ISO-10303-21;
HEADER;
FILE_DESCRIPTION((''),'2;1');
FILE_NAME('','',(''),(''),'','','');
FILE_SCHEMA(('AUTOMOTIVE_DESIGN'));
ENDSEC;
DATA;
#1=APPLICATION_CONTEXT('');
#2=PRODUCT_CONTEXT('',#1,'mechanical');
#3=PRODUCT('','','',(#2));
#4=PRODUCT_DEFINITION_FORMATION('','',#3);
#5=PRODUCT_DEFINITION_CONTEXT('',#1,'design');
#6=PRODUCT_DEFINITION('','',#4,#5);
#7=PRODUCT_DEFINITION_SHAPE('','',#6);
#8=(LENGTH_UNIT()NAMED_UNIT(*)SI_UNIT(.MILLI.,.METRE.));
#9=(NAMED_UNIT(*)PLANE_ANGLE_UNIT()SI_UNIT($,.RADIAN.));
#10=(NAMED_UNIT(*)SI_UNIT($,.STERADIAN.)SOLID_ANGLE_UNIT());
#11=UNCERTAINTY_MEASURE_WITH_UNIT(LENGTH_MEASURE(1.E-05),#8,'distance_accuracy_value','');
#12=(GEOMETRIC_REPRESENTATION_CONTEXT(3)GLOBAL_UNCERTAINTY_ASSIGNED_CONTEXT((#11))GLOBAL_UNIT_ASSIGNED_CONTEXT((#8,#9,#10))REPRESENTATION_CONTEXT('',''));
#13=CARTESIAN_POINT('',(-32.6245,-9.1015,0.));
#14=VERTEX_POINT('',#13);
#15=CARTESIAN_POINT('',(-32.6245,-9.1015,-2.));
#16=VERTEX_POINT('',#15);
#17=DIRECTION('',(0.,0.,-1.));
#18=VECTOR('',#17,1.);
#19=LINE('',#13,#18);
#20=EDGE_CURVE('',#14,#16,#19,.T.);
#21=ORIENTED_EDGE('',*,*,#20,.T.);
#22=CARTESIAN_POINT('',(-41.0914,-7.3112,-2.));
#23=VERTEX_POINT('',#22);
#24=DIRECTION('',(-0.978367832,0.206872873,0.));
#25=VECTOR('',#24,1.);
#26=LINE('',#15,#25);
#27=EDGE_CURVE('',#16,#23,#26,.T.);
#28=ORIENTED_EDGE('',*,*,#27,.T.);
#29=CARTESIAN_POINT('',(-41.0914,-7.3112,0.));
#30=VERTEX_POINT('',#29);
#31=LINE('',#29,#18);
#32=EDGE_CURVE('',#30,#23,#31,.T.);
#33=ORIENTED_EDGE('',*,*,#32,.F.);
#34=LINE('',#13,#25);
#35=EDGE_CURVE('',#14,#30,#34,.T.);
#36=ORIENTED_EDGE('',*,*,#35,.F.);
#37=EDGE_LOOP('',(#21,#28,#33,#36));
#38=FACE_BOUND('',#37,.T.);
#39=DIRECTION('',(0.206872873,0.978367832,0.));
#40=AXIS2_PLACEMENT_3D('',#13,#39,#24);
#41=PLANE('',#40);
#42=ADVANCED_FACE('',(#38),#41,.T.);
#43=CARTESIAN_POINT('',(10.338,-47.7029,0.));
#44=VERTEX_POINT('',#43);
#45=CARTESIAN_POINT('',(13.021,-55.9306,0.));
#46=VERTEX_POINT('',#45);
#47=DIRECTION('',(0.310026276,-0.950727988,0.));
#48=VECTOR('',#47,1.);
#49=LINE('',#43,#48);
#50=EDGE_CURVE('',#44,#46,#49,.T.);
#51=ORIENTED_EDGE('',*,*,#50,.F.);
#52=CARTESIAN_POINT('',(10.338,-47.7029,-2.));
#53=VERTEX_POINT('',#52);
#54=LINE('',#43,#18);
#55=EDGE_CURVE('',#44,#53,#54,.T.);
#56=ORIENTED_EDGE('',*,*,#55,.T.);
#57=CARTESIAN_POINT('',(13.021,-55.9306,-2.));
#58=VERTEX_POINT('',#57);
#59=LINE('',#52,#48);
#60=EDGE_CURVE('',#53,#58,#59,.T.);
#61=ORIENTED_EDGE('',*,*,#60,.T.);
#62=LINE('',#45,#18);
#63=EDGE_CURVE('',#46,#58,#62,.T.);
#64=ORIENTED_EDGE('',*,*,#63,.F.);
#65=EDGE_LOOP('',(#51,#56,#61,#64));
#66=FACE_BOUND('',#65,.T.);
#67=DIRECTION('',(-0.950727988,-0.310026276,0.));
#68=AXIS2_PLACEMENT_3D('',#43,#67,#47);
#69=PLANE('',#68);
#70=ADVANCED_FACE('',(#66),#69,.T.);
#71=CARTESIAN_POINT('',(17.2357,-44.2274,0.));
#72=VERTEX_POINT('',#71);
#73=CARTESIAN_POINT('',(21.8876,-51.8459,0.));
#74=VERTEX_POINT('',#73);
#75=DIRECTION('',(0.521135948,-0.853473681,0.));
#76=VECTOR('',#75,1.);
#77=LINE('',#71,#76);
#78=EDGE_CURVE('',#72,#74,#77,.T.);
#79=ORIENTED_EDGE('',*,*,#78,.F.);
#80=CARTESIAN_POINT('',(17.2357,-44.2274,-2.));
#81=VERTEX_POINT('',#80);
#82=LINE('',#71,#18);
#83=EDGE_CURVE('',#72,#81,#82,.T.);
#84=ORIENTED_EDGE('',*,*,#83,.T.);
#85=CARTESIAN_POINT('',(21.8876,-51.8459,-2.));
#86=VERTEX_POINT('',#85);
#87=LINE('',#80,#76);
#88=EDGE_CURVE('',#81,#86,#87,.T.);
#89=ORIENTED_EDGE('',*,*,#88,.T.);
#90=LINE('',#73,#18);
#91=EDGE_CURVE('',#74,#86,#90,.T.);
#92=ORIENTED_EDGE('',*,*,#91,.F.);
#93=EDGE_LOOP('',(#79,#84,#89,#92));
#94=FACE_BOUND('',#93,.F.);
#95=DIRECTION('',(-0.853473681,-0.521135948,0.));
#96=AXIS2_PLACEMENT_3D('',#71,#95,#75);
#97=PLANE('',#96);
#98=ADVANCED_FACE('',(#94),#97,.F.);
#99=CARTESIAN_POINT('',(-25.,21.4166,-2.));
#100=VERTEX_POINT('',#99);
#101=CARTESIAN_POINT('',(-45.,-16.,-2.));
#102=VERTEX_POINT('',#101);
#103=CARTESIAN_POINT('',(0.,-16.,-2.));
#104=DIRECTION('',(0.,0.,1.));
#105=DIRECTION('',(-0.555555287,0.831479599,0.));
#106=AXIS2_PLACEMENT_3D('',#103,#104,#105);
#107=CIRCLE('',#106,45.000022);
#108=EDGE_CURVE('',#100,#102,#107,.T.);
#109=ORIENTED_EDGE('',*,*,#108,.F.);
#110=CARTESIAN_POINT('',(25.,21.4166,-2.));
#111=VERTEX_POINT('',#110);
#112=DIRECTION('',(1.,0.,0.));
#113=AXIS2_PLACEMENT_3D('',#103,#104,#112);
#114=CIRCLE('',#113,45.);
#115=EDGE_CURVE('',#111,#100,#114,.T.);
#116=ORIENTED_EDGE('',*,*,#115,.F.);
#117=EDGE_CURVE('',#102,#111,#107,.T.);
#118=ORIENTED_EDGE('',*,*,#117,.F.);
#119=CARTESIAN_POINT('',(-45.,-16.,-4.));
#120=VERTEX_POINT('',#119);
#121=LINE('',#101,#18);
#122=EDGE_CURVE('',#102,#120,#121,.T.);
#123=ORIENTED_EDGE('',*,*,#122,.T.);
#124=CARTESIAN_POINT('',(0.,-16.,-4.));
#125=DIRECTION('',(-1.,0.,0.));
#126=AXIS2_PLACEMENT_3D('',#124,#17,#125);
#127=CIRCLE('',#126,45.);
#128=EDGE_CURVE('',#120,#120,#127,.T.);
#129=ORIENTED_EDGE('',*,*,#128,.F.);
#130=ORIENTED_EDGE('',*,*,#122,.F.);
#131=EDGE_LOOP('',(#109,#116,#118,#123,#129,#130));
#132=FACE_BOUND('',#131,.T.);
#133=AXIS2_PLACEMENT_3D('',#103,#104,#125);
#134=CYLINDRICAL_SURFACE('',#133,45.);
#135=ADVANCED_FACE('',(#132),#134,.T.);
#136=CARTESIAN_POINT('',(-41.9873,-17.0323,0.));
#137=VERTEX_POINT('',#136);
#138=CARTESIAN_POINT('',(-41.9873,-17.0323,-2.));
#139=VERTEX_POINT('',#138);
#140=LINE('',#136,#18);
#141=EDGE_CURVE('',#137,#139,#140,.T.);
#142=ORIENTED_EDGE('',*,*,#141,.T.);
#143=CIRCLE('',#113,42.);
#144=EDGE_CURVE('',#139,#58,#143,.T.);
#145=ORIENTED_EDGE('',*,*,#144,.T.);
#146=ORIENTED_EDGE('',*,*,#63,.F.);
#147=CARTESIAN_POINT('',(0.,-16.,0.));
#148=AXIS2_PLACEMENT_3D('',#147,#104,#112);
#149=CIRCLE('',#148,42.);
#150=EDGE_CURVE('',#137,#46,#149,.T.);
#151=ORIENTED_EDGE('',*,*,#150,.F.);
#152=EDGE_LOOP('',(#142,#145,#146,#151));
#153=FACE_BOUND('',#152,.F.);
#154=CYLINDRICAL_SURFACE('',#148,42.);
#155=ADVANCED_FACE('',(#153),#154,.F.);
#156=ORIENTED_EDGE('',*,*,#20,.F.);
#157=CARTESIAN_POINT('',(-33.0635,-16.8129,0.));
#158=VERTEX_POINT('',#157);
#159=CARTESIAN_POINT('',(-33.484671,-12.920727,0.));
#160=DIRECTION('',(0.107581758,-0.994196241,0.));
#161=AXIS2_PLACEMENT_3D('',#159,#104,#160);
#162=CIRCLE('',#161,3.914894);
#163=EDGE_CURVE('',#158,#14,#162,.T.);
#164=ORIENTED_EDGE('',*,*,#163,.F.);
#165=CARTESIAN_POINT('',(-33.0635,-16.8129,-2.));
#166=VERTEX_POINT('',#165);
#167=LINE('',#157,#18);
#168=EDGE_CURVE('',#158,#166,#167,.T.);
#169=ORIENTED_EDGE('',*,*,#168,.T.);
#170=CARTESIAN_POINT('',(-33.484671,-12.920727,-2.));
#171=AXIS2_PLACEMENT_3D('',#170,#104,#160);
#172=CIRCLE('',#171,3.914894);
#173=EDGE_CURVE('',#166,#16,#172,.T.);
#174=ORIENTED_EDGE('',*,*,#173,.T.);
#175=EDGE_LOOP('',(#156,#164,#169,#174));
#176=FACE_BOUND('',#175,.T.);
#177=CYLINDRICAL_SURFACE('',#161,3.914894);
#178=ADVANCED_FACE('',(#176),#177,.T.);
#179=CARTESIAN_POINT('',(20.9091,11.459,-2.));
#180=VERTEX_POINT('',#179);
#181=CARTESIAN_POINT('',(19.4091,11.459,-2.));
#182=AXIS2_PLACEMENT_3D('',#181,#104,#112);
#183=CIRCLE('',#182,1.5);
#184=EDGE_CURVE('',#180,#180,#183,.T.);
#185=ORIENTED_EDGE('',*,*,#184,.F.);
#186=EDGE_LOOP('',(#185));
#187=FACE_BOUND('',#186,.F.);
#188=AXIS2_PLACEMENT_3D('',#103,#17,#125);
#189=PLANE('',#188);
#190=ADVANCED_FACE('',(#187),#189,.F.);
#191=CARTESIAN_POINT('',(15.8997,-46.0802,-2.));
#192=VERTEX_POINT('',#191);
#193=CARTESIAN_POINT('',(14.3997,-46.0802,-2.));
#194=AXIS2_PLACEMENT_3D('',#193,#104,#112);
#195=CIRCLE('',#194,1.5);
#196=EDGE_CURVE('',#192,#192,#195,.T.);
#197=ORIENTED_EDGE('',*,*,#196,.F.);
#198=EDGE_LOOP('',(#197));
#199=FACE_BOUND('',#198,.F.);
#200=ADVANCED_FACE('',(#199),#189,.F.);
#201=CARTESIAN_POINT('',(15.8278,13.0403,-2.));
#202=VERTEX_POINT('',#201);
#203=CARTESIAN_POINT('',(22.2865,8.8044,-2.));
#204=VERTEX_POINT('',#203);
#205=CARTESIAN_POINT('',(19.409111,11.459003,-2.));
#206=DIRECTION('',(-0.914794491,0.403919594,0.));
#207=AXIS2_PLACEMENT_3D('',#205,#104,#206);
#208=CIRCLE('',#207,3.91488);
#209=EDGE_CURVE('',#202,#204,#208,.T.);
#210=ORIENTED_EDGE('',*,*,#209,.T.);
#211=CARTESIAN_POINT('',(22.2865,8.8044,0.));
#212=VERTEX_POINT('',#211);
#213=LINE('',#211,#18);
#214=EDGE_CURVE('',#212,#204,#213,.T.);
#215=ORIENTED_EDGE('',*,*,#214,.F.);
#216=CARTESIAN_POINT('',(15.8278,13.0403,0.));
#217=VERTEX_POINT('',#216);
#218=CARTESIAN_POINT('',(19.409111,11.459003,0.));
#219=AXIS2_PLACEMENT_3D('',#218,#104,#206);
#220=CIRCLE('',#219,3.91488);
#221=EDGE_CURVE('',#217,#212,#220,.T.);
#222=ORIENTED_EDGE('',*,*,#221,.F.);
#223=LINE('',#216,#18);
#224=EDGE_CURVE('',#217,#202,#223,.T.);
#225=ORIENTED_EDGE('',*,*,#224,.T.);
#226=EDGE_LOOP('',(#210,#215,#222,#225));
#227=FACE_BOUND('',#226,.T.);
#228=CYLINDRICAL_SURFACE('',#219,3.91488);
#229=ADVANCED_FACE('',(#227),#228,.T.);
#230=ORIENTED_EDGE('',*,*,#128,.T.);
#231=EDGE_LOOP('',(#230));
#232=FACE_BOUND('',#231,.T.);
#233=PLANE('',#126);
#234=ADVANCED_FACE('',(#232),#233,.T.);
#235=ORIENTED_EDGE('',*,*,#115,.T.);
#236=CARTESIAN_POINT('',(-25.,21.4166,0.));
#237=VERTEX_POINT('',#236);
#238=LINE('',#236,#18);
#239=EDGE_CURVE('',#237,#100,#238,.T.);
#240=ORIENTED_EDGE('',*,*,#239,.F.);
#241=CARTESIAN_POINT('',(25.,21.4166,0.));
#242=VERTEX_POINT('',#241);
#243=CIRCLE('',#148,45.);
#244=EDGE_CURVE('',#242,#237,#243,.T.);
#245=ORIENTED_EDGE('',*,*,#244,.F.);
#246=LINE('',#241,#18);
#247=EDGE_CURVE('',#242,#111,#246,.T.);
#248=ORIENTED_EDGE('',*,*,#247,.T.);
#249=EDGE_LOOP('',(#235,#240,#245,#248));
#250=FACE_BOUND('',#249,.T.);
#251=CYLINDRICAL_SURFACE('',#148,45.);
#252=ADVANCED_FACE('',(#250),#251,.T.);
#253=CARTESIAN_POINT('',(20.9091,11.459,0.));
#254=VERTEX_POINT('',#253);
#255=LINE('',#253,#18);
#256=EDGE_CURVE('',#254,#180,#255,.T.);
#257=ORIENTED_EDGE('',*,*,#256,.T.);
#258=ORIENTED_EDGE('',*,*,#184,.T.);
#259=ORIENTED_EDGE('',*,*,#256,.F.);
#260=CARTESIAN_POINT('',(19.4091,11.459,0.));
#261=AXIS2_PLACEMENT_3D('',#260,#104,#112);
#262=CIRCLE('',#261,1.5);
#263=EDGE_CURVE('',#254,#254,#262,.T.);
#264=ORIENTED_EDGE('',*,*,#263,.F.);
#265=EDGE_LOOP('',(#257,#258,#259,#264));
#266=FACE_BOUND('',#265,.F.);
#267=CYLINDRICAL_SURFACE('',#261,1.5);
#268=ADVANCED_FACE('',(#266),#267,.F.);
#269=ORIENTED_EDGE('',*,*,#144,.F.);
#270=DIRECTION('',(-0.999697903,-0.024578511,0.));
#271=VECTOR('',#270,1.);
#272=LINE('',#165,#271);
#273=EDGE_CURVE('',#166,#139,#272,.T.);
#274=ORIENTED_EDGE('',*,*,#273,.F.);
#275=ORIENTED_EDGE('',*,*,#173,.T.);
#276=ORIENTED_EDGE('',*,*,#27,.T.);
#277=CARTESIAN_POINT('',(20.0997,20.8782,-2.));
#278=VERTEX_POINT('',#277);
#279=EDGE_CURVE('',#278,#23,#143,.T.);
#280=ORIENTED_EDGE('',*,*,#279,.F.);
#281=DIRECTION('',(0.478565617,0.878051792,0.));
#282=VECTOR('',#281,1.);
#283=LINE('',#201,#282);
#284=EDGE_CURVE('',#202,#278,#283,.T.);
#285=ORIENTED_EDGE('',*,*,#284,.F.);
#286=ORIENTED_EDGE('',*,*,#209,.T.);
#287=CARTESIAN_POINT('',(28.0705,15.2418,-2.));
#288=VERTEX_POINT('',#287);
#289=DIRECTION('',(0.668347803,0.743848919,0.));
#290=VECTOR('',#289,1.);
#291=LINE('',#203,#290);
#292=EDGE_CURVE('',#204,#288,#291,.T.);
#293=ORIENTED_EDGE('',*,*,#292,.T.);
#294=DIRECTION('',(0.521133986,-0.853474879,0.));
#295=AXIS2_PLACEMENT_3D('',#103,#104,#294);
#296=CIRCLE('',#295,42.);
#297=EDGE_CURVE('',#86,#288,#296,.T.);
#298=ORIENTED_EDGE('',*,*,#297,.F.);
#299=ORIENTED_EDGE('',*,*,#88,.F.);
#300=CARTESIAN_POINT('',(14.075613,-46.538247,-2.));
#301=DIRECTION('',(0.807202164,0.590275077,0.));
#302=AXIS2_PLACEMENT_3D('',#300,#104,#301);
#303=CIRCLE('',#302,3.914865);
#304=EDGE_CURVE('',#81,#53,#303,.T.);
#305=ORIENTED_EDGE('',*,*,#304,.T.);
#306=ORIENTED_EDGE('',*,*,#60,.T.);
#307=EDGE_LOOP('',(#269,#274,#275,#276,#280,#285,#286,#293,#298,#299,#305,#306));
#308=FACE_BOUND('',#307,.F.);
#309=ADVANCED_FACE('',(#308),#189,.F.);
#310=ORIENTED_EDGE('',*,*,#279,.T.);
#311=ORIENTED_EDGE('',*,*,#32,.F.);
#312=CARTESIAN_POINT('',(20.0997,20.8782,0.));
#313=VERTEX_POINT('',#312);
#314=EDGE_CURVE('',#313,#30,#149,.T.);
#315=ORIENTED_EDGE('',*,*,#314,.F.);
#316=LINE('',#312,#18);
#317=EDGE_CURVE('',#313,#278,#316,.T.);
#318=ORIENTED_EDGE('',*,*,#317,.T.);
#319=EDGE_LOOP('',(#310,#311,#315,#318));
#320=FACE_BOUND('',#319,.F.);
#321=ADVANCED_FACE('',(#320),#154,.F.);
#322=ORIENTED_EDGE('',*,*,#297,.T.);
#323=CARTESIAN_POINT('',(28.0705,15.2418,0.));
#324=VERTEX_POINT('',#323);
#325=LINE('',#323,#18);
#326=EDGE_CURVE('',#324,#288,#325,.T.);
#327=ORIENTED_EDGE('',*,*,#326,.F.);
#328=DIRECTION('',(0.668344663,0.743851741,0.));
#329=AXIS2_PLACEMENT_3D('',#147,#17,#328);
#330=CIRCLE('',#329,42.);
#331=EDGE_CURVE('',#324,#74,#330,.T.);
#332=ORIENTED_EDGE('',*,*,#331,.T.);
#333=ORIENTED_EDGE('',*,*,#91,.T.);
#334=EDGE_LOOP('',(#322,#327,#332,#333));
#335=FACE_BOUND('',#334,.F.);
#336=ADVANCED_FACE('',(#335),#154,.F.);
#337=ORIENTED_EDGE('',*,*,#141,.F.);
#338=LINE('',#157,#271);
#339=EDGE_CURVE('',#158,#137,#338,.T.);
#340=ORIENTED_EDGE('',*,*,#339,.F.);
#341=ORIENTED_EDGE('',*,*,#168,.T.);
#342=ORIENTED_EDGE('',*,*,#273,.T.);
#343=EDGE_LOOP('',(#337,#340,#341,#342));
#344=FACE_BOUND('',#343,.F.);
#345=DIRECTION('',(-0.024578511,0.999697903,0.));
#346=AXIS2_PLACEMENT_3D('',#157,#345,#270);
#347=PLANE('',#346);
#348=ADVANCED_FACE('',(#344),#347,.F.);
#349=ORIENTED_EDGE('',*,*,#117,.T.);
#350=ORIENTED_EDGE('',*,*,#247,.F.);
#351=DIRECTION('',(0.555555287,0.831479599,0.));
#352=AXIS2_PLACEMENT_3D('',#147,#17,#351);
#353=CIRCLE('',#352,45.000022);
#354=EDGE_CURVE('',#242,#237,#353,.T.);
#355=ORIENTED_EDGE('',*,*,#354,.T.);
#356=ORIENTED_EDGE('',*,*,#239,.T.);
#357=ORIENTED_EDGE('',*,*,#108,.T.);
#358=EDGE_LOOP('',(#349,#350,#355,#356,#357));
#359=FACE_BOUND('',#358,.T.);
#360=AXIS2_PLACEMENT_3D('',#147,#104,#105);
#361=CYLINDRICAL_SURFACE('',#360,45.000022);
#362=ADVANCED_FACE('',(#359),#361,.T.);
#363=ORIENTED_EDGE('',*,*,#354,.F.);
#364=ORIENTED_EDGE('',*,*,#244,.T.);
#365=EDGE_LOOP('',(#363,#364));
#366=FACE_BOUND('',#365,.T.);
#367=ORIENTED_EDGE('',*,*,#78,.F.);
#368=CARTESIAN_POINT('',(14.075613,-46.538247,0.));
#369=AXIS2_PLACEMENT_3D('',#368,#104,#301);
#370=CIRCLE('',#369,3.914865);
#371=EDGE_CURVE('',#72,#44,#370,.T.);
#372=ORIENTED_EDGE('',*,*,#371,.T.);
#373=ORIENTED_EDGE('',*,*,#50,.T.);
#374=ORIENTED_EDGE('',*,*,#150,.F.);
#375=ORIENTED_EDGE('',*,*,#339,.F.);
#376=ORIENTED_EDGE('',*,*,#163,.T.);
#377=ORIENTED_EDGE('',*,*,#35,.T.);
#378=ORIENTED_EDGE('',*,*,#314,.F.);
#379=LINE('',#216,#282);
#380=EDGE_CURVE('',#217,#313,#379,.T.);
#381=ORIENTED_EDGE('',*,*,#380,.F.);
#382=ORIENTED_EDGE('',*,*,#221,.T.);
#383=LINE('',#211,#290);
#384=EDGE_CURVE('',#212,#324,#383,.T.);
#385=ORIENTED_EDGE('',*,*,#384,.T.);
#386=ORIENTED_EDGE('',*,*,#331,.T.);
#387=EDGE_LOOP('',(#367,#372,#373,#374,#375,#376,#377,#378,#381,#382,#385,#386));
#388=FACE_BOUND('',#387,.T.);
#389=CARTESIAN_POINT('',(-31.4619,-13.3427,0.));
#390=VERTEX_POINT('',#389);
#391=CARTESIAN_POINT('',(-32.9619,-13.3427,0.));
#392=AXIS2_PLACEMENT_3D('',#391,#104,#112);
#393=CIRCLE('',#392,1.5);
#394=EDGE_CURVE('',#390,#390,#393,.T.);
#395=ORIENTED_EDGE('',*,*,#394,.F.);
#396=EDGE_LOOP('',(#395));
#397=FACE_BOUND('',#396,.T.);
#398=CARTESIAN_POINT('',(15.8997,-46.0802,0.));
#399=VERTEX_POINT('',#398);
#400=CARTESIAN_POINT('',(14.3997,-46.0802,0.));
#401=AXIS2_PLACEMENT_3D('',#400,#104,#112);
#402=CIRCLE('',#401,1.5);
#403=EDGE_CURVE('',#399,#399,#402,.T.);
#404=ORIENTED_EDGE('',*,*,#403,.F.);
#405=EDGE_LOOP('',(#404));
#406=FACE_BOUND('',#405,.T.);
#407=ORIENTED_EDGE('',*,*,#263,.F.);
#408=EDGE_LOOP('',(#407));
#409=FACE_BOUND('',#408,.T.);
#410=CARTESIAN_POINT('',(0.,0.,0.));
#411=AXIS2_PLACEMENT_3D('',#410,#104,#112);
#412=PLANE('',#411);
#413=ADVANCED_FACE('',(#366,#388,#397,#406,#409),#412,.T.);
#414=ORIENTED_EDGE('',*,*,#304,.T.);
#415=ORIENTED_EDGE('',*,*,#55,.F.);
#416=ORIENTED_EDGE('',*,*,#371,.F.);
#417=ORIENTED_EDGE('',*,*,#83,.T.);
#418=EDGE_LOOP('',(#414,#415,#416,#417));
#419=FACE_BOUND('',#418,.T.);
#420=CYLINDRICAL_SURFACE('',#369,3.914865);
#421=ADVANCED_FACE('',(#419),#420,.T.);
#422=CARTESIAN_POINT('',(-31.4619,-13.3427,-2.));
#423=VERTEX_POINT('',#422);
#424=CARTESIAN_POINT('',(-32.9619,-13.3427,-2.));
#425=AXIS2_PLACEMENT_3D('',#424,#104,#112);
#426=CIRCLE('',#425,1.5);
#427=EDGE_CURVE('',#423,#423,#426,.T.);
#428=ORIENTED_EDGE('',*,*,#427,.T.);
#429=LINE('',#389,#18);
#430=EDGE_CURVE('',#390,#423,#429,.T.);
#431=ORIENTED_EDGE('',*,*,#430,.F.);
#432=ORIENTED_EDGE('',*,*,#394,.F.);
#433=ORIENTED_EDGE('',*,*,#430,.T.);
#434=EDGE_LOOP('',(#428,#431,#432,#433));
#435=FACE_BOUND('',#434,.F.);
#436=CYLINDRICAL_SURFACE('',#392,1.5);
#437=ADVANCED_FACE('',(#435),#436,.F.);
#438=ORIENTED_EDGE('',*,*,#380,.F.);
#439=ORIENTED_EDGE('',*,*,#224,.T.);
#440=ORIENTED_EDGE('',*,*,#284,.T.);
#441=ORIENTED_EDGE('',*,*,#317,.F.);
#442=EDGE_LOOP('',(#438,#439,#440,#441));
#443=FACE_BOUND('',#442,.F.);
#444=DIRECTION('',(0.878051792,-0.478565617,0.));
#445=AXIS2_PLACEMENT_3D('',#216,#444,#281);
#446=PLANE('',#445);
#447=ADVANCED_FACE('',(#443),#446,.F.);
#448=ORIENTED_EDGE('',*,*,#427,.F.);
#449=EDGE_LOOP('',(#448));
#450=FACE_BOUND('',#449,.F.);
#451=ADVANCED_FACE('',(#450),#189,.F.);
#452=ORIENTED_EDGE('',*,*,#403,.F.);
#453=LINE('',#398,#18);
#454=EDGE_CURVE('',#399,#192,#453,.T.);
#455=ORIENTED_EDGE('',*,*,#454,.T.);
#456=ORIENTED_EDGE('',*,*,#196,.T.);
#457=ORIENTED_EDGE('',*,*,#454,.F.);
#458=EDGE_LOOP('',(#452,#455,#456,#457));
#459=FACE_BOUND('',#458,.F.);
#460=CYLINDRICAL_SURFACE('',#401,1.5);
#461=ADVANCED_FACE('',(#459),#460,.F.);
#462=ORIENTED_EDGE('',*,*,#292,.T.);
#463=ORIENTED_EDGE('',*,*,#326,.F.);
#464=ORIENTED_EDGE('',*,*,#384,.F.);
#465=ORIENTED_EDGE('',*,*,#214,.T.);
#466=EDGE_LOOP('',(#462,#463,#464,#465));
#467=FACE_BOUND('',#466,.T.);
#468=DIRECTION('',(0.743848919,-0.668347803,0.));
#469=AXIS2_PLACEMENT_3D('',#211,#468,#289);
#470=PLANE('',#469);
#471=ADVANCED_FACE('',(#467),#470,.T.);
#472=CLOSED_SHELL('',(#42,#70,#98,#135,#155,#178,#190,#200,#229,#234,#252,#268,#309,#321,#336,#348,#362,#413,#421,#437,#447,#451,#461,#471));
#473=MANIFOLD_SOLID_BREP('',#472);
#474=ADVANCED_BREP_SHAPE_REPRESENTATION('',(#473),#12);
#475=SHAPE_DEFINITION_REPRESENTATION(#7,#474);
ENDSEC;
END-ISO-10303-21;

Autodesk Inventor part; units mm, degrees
ref_plane "YZ Plane" through (0, 0, 0) normal (1, 0, 0) x (0, 1, 0)
ref_plane "XZ Plane" through (0, 0, 0) normal (0, 1, 0) x (-1, 0, 0)
ref_plane "XY Plane" through (0, 0, 0) normal (0, 0, 1) x (1, 0, 0)
sketch "Esquisse1" plane through (0, 0, 0) normal (0, 0, 1) x (1, 0, 0)
  circle A0 centre (-32.9619, -13.3427) radius 1.5 projected
  circle A1 centre (14.3997, -46.0802) radius 1.5 projected
  circle A2 centre (19.4091, 11.459) radius 1.5 projected
  arc A3 (-25, 21.4166) -> (25, 21.4166) centre (0, -16) ccw projected
  line L0 (25, 61) -> (25, 21.4166) projected
  line L1 (-25, 61) -> (25, 61) projected
  line L2 (-25, 21.4166) -> (-25, 61) projected
  circle A4 centre (0, -16) radius 42
  line L3 (0, -16) -> (24.2426, 18.2972) construction
  arc A5 (15.8278, 13.0403) -> (22.2865, 8.8044) centre (19.4091, 11.459) ccw
  line L4 (22.2865, 8.8044) -> (28.0705, 15.2418)
  line L5 (15.8278, 13.0403) -> (20.0997, 20.8782)
  line L6 (0, -16) -> (-41.8235, -12.1539) construction
  arc A6 (-33.0635, -16.8129) -> (-32.6245, -9.1015) centre (-33.4847, -12.9207) ccw
  line L7 (-32.6245, -9.1015) -> (-41.0914, -7.3112)
  line L8 (-33.0635, -16.8129) -> (-41.9873, -17.0323)
  line L9 (0, -16) -> (17.5809, -54.1433) construction
  arc A7 (17.2357, -44.2274) -> (10.338, -47.7029) centre (14.0756, -46.5383) ccw
  line L10 (10.338, -47.7029) -> (13.021, -55.9306)
  line L11 (17.2357, -44.2274) -> (21.8876, -51.8459)
  circle A8 centre (0, -16) radius 45
  point P0 (0, 0)
  point P1 (25, 21.4166)
  point P2 (-25, 21.4166)
  dimension "d0" = 3
  dimension "d3" = 360
extrude "Extrusion1" add sketch "Esquisse1" against normal blind 2 contours A8 A3 | L4 A5 L5 A4 | A4 L10 A7 L11 | L7 A6 L8 A4
sketch "Esquisse2" plane through (0, -16, -2) normal (0, 0, -1) x (-1, 0, 0)
  circle A0 centre (0, 0) radius 45
  point P0 (0, 16)
extrude "Extrusion2" add sketch "Esquisse2" along normal blind 2
properties part number "clips Anemo"
